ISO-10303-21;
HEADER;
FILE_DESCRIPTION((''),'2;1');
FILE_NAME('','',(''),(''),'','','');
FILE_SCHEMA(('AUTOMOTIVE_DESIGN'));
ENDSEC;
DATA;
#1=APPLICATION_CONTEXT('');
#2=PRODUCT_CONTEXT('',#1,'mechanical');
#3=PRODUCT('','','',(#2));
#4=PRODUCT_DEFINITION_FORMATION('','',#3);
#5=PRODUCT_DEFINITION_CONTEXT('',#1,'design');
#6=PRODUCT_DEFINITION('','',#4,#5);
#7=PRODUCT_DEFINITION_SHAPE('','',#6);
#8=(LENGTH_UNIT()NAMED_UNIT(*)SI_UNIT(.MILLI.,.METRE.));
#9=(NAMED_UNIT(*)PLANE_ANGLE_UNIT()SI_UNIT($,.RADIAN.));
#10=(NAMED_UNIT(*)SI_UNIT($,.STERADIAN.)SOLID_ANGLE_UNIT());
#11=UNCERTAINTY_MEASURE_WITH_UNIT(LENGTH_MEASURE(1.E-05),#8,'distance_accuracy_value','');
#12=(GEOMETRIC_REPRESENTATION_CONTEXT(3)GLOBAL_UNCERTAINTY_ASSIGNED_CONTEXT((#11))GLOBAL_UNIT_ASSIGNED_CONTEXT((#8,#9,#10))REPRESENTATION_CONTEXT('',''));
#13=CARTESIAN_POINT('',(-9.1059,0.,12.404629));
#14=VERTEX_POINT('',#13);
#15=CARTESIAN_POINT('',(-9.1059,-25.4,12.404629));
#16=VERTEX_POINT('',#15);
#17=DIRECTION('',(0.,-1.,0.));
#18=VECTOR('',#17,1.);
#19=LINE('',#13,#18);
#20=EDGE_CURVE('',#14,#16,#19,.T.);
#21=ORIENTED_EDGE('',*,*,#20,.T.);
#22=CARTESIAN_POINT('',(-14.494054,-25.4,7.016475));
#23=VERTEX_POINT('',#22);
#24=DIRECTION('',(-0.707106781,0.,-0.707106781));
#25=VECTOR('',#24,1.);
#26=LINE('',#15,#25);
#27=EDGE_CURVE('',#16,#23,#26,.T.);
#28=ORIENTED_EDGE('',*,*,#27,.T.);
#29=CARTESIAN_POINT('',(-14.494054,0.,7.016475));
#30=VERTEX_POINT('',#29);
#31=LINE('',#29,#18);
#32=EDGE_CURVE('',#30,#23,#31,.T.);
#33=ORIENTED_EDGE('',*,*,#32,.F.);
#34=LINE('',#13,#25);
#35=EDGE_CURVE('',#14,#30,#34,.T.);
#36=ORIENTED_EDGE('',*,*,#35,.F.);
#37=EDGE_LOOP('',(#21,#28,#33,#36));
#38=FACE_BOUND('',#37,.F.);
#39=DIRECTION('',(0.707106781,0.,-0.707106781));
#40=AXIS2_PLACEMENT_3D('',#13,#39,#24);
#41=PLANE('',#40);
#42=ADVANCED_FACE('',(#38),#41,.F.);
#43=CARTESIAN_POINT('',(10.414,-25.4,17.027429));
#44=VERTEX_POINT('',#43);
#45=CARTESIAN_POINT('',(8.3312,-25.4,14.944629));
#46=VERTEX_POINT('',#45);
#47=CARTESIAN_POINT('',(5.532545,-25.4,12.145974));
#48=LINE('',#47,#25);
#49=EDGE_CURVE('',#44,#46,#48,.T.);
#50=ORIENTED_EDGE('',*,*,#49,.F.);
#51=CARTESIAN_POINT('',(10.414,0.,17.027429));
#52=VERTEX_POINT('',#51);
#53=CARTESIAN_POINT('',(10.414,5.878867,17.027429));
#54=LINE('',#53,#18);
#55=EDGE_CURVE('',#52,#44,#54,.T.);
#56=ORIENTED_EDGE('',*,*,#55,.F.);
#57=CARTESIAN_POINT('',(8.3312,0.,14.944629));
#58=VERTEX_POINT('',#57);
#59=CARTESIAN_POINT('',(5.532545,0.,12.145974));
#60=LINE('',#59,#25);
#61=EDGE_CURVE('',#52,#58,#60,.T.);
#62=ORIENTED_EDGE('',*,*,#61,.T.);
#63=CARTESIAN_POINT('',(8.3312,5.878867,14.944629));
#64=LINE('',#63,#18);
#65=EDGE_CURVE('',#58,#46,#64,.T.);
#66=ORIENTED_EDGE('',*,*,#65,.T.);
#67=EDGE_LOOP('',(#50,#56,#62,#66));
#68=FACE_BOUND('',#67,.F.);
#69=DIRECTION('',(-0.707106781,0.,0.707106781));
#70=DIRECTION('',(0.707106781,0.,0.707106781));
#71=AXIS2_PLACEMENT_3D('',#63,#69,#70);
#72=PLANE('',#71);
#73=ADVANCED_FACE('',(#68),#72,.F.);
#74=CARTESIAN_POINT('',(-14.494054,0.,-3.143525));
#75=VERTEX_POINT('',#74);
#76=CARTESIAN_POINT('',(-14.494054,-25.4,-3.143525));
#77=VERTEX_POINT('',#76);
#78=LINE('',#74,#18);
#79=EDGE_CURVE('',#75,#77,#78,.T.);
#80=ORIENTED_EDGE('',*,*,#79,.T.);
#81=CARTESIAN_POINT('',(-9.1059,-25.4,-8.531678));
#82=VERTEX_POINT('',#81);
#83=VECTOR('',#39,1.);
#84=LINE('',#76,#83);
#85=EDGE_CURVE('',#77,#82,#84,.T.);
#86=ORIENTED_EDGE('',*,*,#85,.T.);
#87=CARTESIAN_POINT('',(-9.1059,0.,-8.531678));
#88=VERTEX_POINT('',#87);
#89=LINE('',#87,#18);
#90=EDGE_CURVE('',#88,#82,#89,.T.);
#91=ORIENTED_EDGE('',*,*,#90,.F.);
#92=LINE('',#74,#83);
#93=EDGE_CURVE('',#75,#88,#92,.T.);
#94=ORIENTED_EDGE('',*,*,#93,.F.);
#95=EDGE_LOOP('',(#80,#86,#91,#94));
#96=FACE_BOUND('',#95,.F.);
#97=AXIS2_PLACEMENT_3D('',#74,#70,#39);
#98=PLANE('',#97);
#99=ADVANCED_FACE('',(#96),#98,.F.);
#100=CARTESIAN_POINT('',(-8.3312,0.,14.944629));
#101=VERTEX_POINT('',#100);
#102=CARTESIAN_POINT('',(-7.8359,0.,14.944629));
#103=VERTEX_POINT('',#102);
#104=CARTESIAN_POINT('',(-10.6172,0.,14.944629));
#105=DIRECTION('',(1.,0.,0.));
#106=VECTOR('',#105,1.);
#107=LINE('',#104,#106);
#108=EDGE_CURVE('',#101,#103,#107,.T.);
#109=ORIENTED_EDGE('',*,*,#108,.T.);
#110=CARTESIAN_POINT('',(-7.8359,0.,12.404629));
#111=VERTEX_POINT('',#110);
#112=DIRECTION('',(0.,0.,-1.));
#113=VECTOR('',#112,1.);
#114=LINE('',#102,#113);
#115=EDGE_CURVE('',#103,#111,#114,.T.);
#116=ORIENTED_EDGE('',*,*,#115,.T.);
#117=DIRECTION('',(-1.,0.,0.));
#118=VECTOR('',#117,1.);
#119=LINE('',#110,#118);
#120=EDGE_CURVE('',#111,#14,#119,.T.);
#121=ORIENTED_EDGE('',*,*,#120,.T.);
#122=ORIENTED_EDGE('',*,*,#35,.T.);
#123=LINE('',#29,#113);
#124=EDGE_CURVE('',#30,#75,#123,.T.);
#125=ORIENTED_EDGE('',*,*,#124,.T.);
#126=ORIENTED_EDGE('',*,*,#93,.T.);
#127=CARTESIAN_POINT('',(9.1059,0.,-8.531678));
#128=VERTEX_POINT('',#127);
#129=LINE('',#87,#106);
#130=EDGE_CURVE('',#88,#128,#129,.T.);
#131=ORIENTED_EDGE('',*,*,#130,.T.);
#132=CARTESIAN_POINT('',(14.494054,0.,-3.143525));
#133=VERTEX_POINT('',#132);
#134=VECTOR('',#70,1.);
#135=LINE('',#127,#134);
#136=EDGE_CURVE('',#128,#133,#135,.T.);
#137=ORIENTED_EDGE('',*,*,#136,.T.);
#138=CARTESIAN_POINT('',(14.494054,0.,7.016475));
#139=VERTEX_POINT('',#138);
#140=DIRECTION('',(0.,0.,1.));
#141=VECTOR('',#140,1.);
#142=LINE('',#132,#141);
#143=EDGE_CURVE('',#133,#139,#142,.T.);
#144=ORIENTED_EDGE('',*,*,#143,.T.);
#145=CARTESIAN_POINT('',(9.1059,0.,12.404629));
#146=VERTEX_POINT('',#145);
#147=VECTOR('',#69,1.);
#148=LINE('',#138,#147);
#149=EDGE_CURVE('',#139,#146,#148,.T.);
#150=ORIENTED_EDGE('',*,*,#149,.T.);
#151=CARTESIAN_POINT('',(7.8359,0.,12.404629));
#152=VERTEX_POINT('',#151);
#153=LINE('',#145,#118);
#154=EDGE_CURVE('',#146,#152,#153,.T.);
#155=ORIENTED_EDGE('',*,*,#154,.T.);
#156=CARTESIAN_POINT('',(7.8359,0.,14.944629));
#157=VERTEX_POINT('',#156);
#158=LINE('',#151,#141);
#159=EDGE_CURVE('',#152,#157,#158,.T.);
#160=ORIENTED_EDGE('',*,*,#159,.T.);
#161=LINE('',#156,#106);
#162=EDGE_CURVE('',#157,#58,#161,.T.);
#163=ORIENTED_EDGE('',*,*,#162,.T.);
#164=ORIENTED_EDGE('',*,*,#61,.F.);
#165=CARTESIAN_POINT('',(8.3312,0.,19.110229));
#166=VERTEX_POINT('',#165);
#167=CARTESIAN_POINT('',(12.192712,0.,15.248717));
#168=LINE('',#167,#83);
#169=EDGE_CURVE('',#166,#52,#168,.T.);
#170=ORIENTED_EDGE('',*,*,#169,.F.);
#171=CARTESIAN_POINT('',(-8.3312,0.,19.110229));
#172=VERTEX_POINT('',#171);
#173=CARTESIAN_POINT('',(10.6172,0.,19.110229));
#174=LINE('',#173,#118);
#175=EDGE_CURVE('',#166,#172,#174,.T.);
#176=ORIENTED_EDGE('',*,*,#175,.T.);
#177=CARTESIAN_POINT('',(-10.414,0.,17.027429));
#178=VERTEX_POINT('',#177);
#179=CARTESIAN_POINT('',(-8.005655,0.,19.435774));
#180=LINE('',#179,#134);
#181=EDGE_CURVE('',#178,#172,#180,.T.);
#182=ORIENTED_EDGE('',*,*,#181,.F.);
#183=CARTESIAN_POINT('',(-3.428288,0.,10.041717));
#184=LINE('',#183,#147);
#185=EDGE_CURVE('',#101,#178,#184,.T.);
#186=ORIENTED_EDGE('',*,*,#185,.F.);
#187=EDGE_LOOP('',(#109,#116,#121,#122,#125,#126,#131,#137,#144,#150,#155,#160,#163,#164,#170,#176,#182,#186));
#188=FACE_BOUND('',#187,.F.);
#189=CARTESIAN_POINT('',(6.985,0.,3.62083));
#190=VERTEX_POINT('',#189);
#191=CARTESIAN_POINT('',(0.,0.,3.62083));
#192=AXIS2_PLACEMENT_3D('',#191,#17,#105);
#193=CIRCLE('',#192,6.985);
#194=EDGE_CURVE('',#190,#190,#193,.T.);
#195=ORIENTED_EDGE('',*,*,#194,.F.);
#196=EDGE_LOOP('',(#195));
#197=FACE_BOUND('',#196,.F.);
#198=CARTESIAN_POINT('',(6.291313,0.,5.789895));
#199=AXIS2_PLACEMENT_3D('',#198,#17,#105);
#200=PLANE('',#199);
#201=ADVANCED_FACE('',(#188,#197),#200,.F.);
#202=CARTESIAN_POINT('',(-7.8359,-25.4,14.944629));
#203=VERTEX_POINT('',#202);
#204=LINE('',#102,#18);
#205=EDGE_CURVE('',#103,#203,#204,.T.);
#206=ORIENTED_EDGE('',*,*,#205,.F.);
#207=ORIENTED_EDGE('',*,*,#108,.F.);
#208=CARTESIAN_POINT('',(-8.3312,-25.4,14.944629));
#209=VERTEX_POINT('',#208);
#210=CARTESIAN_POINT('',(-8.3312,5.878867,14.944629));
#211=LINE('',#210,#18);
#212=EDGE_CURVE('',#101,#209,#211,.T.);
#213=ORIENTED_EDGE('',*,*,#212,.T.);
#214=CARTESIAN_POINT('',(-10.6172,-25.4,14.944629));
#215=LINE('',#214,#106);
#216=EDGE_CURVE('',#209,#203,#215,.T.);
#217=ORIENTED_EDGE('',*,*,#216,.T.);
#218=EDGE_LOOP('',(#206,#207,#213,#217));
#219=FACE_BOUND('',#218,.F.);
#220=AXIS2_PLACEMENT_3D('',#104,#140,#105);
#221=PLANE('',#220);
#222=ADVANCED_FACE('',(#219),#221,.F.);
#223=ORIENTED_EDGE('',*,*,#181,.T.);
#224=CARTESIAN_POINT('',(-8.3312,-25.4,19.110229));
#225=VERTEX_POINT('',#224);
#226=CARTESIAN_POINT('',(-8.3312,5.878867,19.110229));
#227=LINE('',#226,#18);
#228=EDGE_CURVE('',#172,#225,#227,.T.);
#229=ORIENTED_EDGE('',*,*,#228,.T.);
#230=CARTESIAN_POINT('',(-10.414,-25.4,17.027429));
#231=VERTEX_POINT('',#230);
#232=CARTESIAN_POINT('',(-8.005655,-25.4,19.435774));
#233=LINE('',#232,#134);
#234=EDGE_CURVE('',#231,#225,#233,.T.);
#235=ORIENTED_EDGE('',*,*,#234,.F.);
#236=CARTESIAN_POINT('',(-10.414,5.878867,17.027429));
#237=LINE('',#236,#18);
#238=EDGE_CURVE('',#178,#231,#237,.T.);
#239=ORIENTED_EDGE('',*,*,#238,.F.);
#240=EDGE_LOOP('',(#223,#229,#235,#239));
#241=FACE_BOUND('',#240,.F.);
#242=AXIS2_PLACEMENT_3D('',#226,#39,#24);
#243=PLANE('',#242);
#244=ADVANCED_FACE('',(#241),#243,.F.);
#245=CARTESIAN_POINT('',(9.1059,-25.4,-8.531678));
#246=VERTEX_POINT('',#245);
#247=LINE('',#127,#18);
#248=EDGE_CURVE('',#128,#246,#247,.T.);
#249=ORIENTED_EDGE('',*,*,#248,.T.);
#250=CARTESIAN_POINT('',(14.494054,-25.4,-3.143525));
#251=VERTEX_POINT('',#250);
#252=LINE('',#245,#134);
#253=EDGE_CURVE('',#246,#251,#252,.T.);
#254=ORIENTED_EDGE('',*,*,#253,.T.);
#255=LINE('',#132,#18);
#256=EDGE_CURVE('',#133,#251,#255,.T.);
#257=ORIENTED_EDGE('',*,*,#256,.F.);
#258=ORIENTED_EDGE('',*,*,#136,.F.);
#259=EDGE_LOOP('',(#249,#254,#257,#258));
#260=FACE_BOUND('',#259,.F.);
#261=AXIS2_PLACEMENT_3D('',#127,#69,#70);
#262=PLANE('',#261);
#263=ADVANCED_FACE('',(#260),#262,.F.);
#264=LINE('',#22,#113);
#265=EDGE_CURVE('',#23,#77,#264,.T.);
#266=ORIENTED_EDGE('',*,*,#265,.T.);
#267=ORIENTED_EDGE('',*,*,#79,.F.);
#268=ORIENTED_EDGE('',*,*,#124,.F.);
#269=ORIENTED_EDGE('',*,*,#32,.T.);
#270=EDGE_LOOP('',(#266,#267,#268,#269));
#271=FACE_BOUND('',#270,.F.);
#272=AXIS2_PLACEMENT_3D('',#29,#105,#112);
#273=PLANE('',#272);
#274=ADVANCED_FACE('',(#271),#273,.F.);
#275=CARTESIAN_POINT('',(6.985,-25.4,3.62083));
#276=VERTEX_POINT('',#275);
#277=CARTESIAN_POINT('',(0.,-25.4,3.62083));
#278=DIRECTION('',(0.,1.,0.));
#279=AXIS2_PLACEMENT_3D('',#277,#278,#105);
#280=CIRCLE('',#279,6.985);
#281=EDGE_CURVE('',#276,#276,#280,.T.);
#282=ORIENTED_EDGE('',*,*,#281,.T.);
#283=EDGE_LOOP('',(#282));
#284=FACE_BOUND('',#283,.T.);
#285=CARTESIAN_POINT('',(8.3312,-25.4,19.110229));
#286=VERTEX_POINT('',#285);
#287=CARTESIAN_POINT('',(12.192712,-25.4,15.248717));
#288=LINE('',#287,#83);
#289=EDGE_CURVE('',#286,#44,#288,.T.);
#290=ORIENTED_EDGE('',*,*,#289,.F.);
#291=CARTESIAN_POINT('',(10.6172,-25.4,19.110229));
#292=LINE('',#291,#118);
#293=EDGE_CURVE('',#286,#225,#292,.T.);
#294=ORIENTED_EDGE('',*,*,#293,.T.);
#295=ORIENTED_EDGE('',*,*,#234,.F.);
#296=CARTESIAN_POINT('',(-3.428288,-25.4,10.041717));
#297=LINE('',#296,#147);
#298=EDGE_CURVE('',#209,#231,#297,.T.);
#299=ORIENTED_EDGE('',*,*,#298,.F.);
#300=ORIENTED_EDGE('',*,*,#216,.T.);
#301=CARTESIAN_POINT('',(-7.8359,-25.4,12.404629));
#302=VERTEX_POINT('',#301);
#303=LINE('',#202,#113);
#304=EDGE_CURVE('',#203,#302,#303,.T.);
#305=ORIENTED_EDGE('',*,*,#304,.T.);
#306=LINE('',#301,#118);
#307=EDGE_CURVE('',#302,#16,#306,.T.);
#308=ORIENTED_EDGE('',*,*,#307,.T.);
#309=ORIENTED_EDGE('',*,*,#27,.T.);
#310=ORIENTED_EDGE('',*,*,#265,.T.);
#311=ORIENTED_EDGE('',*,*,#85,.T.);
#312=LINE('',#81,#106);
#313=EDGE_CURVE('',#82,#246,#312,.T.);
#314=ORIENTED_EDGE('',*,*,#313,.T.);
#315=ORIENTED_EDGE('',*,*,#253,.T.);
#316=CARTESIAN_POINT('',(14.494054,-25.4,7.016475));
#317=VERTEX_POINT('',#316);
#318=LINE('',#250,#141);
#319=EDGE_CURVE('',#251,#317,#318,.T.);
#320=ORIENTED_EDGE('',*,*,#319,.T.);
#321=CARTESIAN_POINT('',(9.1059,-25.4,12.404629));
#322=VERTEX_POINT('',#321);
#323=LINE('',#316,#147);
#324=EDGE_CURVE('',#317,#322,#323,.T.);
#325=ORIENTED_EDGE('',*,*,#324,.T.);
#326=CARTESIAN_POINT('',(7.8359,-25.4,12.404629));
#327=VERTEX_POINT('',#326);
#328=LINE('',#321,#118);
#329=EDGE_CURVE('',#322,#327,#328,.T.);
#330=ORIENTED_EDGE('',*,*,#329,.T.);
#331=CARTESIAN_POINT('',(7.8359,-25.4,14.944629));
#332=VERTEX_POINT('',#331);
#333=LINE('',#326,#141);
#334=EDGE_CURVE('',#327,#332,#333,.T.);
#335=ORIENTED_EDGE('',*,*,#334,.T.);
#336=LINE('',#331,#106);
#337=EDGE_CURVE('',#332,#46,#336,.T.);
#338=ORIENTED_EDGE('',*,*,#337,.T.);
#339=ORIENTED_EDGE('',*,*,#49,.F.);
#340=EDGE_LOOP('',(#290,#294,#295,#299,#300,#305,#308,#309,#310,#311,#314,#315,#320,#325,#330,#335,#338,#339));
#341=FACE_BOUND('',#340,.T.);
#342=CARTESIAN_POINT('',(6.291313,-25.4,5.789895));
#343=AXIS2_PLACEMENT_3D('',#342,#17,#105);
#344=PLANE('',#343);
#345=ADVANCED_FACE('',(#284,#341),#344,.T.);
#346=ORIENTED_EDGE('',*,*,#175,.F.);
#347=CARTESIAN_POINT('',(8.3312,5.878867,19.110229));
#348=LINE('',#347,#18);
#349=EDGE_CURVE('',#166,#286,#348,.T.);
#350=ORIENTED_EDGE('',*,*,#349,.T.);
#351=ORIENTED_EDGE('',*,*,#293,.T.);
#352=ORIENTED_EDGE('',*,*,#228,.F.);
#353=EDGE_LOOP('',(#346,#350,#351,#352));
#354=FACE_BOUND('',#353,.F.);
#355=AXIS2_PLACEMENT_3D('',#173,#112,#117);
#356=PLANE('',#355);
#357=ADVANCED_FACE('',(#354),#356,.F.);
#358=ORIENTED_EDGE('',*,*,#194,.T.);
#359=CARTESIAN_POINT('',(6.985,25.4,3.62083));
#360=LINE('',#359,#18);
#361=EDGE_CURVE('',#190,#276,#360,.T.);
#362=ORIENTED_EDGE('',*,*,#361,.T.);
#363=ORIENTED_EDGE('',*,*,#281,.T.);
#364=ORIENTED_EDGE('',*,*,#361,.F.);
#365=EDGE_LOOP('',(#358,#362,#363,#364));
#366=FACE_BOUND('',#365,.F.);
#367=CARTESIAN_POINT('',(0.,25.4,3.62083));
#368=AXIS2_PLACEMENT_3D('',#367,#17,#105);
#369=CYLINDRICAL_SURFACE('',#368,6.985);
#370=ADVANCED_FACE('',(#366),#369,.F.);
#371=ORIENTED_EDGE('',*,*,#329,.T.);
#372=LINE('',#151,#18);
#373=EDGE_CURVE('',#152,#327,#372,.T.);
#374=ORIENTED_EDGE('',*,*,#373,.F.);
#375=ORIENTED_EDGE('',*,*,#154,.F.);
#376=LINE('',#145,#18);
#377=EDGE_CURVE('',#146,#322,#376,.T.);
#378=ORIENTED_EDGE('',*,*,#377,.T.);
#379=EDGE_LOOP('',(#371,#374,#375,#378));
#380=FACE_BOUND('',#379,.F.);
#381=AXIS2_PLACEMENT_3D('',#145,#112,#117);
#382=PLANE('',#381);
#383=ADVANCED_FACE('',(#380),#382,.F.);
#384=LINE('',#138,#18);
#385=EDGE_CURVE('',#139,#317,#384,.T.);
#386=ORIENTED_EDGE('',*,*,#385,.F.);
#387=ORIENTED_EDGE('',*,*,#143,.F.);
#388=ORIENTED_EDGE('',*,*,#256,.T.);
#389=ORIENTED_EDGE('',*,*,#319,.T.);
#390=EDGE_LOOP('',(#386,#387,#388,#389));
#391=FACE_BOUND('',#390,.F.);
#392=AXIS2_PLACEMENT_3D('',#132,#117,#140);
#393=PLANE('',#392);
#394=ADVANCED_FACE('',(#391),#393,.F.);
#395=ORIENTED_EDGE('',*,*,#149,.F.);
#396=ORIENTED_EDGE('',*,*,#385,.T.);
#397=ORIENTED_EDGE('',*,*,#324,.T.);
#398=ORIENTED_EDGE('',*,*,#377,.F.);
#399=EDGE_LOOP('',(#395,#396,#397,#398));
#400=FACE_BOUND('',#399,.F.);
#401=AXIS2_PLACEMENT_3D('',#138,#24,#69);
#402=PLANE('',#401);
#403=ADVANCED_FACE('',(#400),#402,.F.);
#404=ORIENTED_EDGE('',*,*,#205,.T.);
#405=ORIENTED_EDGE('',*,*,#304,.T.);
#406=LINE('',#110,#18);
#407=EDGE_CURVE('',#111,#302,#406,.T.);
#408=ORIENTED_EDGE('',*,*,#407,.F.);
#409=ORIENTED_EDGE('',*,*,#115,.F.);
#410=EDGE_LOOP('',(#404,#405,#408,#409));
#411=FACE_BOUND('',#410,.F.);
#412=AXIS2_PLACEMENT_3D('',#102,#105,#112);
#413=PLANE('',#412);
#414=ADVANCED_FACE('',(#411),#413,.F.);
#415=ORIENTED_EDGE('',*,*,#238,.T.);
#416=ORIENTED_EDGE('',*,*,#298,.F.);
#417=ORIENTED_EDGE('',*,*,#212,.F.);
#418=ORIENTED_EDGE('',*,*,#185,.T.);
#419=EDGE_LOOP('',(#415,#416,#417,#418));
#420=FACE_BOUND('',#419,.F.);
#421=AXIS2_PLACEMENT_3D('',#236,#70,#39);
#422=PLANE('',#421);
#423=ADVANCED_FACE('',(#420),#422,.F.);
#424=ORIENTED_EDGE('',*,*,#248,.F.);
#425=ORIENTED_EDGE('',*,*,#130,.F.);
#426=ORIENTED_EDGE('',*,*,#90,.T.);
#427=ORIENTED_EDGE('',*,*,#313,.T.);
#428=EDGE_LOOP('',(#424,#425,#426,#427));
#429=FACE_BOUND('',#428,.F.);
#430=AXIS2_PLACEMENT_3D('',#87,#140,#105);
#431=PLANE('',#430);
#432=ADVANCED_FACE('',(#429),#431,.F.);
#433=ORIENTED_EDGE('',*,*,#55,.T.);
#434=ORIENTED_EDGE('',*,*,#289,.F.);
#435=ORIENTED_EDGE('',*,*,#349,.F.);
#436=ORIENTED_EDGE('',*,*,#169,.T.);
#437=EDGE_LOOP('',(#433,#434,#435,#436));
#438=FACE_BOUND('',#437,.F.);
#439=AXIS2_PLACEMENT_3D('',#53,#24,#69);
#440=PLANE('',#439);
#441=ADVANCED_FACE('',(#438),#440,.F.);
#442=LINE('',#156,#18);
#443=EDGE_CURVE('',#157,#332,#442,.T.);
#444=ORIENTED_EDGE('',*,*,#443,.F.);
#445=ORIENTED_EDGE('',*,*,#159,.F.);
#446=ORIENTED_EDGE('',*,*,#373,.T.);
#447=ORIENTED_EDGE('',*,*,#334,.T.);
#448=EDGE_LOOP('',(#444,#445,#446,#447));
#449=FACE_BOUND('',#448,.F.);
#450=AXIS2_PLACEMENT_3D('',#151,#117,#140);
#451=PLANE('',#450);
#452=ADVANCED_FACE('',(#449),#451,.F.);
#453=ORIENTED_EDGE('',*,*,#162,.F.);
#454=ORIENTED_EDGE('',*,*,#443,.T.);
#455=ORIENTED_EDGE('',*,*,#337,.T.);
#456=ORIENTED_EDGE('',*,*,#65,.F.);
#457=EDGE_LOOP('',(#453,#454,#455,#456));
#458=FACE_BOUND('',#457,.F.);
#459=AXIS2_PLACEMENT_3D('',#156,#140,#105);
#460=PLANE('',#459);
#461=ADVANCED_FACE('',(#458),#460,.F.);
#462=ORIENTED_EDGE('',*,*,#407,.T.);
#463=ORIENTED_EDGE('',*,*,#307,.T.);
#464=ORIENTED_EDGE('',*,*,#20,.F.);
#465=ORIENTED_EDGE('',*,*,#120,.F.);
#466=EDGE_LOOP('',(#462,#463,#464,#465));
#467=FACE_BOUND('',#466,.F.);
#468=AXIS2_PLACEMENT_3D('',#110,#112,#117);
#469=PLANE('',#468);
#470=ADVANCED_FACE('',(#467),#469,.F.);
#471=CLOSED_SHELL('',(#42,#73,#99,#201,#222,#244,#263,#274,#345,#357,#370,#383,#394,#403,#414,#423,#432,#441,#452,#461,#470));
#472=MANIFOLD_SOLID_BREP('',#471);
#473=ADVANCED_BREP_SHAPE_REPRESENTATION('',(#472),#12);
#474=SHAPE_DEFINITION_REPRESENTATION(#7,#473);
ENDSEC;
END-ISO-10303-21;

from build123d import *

# Parameters (mm, degrees)
F1_DEPTH    = 25.4
F3_D        = 13.97
F3_DEPTH    = 25.4
F3_TIP      = 4.1970114239
F4_T1_DEPTH = 37.157734621


# Not quite as in the source:
# - a fillet or chamfer that OpenCascade refuses, or shapes differently, is made with other operations: its cross-section is extruded or revolved along the edge and cut away or added


with BuildPart() as f1:
    # F0 (on Front) → F1 (new body)
    with BuildSketch(Plane.XZ):
        Polygon((10.6172, 19.1102290041), (0, 19.1102290041), (0, -8.5316783412), (9.1059, -8.5316783412), (14.4940536726, -3.1435246685), (14.4940536726, 7.0164753315), (9.1059, 12.4046290041), (7.8359, 12.4046290041), (7.8359, 14.9446290041), (10.6172, 14.9446290041), align=None)
        Polygon((0, -8.5316783412), (0, 19.1102290041), (-10.6172, 19.1102290041), (-10.6172, 14.9446290041), (-7.8359, 14.9446290041), (-7.8359, 12.4046290041), (-9.1059, 12.4046290041), (-14.4940536726, 7.0164753315), (-14.4940536726, -3.1435246685), (-9.1059, -8.5316783412), align=None)
    extrude(amount=F1_DEPTH)

    # F3
    with Locations(Plane(origin=(0, 0, 0), x_dir=(-1, 0, 0), z_dir=(0, 1, 0))):
        with Locations((0, 3.620829666)):
            Hole(F3_D / 2, depth=F3_DEPTH)
            with Locations((0, 0, -(F3_DEPTH + F3_TIP / 2))):  # 118° drill point
                Cone(0, F3_D / 2, F3_TIP, mode=Mode.SUBTRACT)

    # F4: chamfer of 2.286 on 4 edges, made by hand

    # F4_s2 → F4_t1 (cut)
    with BuildSketch(Plane.XZ.offset(-5.8788673105)):
        Polygon((8.3312, 14.9446290041), (10.6172, 17.2306290041), (10.6172, 14.9446290041), align=None)
        Polygon((10.6172, 16.8242290041), (8.3312, 19.1102290041), (10.6172, 19.1102290041), align=None)
        Polygon((-8.3312, 19.1102290041), (-10.6172, 16.8242290041), (-10.6172, 19.1102290041), align=None)
        Polygon((-10.6172, 17.2306290041), (-8.3312, 14.9446290041), (-10.6172, 14.9446290041), align=None)
    extrude(amount=F4_T1_DEPTH, mode=Mode.SUBTRACT)


solid = f1.part
